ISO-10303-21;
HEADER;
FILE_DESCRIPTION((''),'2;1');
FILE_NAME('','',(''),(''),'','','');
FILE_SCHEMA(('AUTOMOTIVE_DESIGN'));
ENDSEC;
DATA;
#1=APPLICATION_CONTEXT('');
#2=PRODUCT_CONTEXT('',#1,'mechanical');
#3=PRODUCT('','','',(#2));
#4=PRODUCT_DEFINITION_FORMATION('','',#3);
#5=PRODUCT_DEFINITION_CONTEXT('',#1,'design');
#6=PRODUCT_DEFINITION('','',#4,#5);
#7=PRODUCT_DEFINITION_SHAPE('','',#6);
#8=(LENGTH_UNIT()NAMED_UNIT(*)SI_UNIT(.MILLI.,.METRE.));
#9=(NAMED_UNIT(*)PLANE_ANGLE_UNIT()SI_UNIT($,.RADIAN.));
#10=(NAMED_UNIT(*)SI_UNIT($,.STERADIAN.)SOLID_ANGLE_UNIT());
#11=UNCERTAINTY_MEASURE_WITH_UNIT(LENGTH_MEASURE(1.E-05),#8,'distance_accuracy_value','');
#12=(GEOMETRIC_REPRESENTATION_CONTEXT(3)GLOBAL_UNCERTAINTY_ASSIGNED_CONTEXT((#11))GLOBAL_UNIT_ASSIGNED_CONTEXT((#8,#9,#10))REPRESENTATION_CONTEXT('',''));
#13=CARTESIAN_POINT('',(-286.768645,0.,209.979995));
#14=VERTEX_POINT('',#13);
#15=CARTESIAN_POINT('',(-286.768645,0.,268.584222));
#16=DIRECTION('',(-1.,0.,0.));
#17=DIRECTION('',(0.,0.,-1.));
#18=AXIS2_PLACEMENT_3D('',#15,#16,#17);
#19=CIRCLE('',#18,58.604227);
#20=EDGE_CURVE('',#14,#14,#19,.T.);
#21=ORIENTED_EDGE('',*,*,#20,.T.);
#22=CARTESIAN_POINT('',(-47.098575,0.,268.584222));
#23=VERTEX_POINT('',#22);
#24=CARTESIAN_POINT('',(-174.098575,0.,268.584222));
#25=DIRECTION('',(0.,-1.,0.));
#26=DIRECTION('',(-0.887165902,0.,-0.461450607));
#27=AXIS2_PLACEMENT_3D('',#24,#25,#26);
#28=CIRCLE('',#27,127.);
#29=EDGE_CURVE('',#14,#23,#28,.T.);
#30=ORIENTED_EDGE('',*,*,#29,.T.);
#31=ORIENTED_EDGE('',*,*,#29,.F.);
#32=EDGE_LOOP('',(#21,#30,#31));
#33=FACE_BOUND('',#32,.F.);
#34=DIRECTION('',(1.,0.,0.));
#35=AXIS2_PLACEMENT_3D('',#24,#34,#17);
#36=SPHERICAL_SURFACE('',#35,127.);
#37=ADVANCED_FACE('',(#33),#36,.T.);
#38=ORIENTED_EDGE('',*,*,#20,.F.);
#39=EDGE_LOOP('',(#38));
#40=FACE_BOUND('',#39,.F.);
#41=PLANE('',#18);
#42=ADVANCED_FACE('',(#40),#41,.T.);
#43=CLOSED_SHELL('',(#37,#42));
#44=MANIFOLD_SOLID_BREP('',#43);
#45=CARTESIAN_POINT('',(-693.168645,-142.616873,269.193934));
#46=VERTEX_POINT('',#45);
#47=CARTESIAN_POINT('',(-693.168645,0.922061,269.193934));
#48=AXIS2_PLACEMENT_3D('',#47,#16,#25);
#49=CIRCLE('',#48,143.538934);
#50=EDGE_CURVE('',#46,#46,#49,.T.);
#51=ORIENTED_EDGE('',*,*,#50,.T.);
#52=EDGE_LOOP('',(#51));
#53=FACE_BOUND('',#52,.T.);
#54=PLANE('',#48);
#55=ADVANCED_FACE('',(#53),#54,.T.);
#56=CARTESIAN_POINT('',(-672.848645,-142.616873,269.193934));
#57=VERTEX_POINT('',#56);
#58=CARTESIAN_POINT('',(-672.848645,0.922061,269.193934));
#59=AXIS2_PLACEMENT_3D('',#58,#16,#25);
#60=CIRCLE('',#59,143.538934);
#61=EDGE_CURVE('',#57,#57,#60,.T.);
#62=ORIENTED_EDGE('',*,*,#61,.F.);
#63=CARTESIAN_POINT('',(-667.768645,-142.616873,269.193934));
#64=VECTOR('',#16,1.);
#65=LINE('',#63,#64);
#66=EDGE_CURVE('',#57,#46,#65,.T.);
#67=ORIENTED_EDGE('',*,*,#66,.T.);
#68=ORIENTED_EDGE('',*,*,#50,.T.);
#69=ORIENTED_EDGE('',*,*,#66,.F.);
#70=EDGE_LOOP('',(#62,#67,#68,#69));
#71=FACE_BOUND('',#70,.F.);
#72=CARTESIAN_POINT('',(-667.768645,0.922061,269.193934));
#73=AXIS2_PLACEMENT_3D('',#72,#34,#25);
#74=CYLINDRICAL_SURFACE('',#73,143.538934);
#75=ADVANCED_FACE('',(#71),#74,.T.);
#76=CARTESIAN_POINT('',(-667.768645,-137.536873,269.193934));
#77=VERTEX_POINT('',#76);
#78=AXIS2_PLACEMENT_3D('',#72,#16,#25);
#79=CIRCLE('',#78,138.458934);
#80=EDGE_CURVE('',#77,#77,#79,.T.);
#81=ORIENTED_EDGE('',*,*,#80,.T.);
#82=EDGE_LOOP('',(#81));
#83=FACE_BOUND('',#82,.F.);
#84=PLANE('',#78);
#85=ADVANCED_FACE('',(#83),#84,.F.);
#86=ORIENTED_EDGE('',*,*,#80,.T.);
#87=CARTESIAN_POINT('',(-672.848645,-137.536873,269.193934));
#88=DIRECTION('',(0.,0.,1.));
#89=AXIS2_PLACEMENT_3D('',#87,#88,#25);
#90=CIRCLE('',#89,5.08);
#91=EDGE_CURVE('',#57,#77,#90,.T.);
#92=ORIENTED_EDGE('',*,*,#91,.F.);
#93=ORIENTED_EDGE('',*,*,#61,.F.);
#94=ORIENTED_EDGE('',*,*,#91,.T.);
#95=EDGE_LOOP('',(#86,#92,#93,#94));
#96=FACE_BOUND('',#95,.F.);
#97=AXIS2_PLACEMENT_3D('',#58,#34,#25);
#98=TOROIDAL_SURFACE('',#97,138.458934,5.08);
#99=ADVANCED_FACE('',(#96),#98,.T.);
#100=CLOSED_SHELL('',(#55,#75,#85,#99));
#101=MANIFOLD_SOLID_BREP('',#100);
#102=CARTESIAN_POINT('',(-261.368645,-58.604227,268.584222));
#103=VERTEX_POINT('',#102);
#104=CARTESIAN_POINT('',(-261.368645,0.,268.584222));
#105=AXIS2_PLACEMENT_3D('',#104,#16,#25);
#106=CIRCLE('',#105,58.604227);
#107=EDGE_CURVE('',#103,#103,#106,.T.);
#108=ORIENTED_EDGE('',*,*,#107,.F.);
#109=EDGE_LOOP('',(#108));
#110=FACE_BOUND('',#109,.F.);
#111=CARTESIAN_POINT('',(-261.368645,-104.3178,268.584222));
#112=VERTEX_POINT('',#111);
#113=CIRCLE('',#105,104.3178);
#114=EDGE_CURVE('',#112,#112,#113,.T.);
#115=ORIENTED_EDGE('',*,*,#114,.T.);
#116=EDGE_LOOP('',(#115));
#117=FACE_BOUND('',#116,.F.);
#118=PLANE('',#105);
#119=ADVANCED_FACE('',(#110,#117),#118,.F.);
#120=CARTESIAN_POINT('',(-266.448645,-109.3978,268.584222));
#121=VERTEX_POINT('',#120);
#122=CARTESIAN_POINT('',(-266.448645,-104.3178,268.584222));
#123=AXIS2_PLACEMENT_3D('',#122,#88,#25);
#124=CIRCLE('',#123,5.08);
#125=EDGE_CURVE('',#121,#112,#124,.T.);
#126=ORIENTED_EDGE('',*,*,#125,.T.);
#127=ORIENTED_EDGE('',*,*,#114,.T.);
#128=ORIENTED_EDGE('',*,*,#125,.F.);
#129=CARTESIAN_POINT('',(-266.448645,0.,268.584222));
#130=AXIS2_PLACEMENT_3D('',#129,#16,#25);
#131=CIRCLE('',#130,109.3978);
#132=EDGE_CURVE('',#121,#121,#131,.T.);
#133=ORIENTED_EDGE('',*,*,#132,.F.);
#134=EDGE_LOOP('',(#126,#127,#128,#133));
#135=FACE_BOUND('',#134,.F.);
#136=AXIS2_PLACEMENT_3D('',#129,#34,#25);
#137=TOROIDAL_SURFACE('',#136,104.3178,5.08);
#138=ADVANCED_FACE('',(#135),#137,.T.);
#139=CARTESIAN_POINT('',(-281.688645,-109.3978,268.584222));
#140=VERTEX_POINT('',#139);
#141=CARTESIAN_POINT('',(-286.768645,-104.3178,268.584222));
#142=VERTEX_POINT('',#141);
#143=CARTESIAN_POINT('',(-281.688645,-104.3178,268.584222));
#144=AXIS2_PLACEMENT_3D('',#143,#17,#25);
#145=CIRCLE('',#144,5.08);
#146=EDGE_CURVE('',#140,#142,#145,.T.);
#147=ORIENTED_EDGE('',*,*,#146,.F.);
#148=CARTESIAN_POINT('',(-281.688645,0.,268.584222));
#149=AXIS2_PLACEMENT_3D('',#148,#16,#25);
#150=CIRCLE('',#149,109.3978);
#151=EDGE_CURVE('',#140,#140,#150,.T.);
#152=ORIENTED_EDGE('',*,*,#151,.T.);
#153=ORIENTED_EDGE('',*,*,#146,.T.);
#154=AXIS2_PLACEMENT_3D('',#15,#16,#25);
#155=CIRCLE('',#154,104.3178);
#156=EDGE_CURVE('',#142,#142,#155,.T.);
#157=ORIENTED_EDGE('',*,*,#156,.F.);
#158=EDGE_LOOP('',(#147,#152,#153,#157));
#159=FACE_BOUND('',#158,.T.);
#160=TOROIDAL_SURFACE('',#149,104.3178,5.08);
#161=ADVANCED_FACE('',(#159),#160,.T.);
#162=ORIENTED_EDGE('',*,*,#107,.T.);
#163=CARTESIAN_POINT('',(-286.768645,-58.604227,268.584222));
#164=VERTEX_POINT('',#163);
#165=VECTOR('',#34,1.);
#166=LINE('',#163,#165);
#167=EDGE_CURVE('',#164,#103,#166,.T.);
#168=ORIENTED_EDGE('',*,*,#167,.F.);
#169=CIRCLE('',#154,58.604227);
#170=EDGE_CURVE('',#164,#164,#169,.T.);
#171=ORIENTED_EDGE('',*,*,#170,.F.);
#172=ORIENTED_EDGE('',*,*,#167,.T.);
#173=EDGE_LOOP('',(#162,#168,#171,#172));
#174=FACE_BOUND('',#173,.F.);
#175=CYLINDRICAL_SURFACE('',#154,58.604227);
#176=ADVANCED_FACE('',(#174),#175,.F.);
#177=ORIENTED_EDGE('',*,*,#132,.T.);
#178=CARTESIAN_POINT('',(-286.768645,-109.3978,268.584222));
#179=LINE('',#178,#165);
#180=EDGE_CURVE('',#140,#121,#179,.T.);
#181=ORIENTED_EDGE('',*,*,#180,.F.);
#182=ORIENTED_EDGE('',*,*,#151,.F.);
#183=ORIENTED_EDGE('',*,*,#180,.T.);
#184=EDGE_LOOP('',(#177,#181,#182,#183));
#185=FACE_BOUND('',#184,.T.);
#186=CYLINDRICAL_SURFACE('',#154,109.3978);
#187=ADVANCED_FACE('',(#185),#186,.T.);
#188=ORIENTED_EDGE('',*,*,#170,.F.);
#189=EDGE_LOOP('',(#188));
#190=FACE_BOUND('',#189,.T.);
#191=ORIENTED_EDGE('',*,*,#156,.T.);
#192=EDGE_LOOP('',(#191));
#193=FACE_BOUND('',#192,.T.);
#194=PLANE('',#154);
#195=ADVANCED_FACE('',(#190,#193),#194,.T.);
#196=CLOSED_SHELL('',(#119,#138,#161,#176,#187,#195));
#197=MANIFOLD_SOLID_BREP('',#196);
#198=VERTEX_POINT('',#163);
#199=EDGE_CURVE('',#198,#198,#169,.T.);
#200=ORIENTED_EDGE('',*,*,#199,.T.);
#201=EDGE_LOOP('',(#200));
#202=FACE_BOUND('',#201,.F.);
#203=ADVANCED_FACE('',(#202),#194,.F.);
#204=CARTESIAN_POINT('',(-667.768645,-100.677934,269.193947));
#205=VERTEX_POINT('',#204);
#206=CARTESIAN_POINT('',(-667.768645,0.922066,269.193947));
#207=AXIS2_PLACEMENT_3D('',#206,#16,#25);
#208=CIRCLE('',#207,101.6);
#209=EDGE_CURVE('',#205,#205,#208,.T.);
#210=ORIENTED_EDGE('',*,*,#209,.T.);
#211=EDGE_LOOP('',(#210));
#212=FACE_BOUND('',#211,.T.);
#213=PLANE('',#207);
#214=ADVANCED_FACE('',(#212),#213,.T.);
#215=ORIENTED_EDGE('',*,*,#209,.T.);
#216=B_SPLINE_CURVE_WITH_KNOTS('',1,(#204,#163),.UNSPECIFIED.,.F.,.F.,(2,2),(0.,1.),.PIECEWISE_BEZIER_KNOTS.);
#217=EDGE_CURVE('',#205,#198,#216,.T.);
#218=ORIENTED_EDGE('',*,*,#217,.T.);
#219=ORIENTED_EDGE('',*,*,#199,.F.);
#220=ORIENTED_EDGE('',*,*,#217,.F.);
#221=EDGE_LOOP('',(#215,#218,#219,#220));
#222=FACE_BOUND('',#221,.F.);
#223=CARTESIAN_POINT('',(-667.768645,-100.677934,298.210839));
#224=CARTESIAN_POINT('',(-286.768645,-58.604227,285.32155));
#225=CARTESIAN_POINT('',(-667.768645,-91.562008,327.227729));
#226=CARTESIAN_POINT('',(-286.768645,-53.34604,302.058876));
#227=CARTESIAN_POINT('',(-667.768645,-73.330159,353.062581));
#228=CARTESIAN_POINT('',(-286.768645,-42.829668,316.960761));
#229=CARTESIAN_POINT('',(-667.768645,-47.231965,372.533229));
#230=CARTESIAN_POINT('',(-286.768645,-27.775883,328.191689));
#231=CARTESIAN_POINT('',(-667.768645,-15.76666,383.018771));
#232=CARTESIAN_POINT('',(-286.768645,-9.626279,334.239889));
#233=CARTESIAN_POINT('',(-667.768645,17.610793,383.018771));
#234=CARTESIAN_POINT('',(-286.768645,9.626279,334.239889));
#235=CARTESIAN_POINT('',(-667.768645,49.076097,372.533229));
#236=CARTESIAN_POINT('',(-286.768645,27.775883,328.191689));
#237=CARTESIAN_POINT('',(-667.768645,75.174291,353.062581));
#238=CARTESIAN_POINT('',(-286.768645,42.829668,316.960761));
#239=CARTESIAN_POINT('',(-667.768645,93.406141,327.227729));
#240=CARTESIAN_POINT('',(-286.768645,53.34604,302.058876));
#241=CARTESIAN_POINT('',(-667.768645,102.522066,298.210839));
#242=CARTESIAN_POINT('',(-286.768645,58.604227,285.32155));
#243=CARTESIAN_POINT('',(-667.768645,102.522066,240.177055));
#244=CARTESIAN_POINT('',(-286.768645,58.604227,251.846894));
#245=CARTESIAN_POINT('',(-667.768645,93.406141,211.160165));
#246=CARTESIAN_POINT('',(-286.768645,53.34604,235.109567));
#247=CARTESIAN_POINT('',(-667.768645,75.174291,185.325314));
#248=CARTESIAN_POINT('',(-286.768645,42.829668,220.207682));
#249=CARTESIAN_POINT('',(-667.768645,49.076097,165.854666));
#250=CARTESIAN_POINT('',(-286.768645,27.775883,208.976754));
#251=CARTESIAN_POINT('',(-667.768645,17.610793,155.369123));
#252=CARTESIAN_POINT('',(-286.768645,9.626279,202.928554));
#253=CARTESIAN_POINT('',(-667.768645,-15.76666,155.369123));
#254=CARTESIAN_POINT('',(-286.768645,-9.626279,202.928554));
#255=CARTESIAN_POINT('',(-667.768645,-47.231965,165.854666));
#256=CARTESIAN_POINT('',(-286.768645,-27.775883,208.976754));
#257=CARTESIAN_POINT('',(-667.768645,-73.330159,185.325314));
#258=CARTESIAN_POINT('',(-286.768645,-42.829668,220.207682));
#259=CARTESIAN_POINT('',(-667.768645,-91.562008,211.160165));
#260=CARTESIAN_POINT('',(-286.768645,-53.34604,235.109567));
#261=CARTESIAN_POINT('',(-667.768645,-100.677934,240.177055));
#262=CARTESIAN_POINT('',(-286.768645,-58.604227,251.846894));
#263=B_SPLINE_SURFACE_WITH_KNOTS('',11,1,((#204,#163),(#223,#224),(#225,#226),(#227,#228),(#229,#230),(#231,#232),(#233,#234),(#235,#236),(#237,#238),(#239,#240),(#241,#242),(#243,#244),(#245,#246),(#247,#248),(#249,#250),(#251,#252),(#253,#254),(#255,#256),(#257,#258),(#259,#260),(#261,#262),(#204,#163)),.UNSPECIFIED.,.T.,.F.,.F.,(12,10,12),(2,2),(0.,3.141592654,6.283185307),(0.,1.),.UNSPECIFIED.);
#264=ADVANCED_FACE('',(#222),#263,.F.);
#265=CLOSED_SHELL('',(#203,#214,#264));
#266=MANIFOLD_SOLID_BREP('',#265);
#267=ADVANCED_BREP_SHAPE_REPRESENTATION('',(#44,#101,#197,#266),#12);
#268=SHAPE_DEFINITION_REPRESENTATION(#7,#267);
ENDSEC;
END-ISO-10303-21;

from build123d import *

# Parameters (mm, degrees)
F2_R      = 109.3978
F2_R_2    = 58.6042270255
F5_DEPTH  = 25.4
F4_R      = 101.6
F1_FACE_R = 58.6042270255
F7_R      = 5.08
F8_R      = 143.5389342848
F8_R_2    = 101.6000641099
F9_DEPTH  = 25.4
F10_R     = 5.08


with BuildPart() as f1:
    # F0 (on Front) → F1 (revolve)
    with BuildSketch(Plane.XZ):
        with BuildLine():
            ThreePointArc((-286.7686450481, 209.979994576), (-143.9331883211, 145.2187101443), (-47.0985754877, 268.5842216015))
            Line((-47.0985754877, 268.5842216015), (-286.7686450481, 268.5842216015))
            Line((-286.7686450481, 268.5842216015), (-286.7686450481, 209.979994576))
        make_face()
    revolve(axis=Axis((-174.0985754877, 0, 268.5842216015), (-1, 0, 0)))


with BuildPart() as f5:
    # F2 (on face) → F5 (new body)
    with BuildSketch(Plane(origin=(-286.7686450481, 0, 0), x_dir=(0, -1, 0), z_dir=(-1, 0, 0))):
        with Locations((0, 268.5842216015)):
            Circle(F2_R)
        with Locations((0, 268.5842216015)):
            Circle(F2_R_2, mode=Mode.SUBTRACT)
    extrude(amount=-F5_DEPTH)

    # F7
    f7_edges = [f5.edges().sort_by_distance(p)[0] for p in [
        (-261.368645, 109.3978, 268.584222),
        (-286.768645, 109.3978, 268.584222),
    ]]
    fillet(f7_edges, radius=F7_R)


with BuildPart() as f6:
    # F4 (on offset) → F6 section 0
    with BuildSketch(Plane(origin=(-667.7686450481, 0, 0), x_dir=(0, -1, 0), z_dir=(-1, 0, 0))):
        with Locations((-0.9220663342, 269.1939473152)):
            Circle(F4_R)
    # F1_face (on face) → F6 section 1
    with BuildSketch(Plane(origin=(-286.7686450481, 0, 268.5842216015), x_dir=(0, -1, 0), z_dir=(-1, 0, 0))):
        Circle(F1_FACE_R)
    loft()


with BuildPart() as f9:
    # F8 (on face) → F9 (new body)
    with BuildSketch(Plane(origin=(-667.7686450481, 0, 0), x_dir=(0, -1, 0), z_dir=(-1, 0, 0))):
        with Locations((-0.9220611856, 269.1939344642)):
            Circle(F8_R)
        with Locations((-0.9220611856, 269.1939344642)):
            Circle(F8_R_2, mode=Mode.SUBTRACT)
        with Locations((-0.9220611856, 269.1939344642)):
            Circle(F8_R_2)
    extrude(amount=F9_DEPTH)

    # F10
    f10_edges = [f9.edges().sort_by_distance(p)[0] for p in [
        (-667.768645, 144.460995, 269.193934),
    ]]
    fillet(f10_edges, radius=F10_R)


solid = Compound([f1.part, f5.part, f6.part, f9.part])
